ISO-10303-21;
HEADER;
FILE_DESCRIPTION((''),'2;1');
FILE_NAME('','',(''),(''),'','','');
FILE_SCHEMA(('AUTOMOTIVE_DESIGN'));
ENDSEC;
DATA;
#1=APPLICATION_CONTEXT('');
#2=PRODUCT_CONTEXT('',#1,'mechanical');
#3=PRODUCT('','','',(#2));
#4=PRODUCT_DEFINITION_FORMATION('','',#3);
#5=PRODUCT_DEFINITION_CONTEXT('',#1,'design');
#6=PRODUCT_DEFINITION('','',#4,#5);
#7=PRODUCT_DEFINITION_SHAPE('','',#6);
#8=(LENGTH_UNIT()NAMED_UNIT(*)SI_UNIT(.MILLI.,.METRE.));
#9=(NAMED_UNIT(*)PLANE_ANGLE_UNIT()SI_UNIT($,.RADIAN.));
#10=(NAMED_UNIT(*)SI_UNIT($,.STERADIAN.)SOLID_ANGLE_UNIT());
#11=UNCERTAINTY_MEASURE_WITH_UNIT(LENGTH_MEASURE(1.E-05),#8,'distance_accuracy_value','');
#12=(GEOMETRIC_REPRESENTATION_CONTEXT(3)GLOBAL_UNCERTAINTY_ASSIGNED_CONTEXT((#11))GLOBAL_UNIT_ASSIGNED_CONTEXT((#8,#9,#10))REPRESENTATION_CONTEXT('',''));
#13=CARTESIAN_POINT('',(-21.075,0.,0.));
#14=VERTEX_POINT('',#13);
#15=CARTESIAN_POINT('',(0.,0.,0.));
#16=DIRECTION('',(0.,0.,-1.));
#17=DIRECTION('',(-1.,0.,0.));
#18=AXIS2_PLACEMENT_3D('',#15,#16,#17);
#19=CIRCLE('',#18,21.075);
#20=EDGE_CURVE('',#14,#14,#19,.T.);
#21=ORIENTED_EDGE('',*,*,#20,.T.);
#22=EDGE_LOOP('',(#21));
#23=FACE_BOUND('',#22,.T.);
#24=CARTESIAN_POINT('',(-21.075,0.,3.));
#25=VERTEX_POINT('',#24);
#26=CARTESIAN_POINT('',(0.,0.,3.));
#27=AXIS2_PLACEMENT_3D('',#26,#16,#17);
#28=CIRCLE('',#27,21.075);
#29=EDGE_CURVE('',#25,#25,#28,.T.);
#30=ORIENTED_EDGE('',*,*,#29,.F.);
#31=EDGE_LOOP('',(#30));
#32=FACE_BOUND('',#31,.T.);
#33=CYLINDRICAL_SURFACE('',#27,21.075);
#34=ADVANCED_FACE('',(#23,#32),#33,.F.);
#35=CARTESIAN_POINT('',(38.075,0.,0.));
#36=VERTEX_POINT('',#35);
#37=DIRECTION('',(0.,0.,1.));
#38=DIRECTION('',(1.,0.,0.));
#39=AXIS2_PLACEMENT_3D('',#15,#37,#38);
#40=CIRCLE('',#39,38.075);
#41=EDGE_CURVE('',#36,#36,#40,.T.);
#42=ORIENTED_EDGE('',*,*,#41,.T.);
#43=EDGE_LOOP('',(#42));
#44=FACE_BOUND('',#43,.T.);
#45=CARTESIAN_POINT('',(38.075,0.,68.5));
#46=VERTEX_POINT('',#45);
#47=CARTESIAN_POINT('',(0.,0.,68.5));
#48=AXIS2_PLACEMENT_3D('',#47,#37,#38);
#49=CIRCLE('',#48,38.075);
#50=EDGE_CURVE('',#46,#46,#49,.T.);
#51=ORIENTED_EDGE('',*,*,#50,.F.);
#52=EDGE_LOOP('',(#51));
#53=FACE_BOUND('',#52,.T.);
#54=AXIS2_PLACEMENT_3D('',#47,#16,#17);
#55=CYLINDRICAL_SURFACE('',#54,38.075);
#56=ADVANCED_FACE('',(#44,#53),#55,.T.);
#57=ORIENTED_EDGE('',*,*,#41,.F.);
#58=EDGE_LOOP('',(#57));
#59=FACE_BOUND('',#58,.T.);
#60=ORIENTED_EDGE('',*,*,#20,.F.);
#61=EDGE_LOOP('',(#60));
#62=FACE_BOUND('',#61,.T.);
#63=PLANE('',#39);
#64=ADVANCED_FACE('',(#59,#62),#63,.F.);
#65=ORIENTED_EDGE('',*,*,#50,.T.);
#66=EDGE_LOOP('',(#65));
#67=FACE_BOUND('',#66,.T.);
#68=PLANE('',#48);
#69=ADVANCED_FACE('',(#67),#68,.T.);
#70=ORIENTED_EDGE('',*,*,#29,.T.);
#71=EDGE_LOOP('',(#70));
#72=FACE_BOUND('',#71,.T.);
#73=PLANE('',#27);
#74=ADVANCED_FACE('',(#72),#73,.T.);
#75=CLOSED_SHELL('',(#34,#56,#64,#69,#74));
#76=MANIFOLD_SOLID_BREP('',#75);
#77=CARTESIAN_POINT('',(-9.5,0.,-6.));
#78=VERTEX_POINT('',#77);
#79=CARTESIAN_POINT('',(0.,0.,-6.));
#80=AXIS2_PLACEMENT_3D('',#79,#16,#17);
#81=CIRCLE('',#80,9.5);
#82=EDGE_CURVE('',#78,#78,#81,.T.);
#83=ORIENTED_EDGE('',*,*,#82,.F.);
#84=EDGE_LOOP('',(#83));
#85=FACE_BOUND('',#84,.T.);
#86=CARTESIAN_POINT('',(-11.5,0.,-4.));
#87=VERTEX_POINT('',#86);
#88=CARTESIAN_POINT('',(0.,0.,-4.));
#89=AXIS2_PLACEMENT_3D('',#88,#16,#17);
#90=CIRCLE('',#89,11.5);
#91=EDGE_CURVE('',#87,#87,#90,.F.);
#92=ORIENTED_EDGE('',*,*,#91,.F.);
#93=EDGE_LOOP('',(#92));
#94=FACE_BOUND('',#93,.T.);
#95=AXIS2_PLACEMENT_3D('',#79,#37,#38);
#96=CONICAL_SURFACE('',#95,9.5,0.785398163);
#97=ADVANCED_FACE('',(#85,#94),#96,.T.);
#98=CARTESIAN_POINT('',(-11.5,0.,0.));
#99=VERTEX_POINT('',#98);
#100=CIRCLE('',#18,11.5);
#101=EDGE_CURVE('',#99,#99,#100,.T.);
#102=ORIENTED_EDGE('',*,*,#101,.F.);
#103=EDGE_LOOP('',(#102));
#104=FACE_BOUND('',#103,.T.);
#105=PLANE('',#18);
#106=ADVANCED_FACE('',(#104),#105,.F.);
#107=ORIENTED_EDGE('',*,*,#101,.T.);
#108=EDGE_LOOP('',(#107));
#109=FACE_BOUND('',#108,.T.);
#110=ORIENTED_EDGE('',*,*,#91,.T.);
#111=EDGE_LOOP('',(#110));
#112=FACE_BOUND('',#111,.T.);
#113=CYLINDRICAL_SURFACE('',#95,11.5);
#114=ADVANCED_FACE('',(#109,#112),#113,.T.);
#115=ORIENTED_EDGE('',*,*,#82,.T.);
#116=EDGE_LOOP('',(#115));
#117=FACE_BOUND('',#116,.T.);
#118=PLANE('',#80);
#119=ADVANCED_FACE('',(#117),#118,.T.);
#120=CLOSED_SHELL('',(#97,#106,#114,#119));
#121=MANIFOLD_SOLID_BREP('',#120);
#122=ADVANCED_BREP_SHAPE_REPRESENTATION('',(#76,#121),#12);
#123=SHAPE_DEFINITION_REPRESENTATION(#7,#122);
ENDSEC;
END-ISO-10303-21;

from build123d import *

# Parameters (mm, degrees)
SKETCH1_R           = 38.075
BOSS_EXTRUDE1_DEPTH = 68.5
SKETCH2_R           = 11.5
BOSS_EXTRUDE2_DEPTH = 6
CHAMFER1_SIZE       = 2
SKETCH3_R           = 21.075
CUT_EXTRUDE1_DEPTH  = 3


with BuildPart() as part:
    # Sketch1 → Boss-Extrude1 (new body)
    with BuildSketch(Plane.XY):
        Circle(SKETCH1_R)
    extrude(amount=BOSS_EXTRUDE1_DEPTH)

    # Sketch2 → Boss-Extrude2 (add)
    with BuildSketch(Plane(origin=(0, 0, 0), x_dir=(-1, 0, 0), z_dir=(0, 0, -1))):
        Circle(SKETCH2_R)
    extrude(amount=BOSS_EXTRUDE2_DEPTH)

    # Chamfer1
    chamfer1_edges = [part.edges().sort_by_distance(p)[0] for p in [
        (11.5, 0, -6),
    ]]
    chamfer(chamfer1_edges, length=CHAMFER1_SIZE)

    # Sketch3 → Cut-Extrude1 (cut)
    with BuildSketch(Plane(origin=(0, 0, 0), x_dir=(-1, 0, 0), z_dir=(0, 0, -1))):
        Circle(SKETCH3_R)
    extrude(amount=-CUT_EXTRUDE1_DEPTH, mode=Mode.SUBTRACT)


with BuildPart() as cut_extrude1_piece_1:
    # of the separate pieces the step leaves, piece 1, a body of its own (cut_extrude1_pieces)
    add(part.part.solids().sort_by_distance((38.075, 0, 0))[0])


with BuildPart() as cut_extrude1_piece_2:
    # of the separate pieces the step leaves, piece 2, a body of its own (cut_extrude1_pieces)
    add(part.part.solids().sort_by_distance((-11.5, 0, -4))[0])


solid = Compound([cut_extrude1_piece_1.part, cut_extrude1_piece_2.part])
